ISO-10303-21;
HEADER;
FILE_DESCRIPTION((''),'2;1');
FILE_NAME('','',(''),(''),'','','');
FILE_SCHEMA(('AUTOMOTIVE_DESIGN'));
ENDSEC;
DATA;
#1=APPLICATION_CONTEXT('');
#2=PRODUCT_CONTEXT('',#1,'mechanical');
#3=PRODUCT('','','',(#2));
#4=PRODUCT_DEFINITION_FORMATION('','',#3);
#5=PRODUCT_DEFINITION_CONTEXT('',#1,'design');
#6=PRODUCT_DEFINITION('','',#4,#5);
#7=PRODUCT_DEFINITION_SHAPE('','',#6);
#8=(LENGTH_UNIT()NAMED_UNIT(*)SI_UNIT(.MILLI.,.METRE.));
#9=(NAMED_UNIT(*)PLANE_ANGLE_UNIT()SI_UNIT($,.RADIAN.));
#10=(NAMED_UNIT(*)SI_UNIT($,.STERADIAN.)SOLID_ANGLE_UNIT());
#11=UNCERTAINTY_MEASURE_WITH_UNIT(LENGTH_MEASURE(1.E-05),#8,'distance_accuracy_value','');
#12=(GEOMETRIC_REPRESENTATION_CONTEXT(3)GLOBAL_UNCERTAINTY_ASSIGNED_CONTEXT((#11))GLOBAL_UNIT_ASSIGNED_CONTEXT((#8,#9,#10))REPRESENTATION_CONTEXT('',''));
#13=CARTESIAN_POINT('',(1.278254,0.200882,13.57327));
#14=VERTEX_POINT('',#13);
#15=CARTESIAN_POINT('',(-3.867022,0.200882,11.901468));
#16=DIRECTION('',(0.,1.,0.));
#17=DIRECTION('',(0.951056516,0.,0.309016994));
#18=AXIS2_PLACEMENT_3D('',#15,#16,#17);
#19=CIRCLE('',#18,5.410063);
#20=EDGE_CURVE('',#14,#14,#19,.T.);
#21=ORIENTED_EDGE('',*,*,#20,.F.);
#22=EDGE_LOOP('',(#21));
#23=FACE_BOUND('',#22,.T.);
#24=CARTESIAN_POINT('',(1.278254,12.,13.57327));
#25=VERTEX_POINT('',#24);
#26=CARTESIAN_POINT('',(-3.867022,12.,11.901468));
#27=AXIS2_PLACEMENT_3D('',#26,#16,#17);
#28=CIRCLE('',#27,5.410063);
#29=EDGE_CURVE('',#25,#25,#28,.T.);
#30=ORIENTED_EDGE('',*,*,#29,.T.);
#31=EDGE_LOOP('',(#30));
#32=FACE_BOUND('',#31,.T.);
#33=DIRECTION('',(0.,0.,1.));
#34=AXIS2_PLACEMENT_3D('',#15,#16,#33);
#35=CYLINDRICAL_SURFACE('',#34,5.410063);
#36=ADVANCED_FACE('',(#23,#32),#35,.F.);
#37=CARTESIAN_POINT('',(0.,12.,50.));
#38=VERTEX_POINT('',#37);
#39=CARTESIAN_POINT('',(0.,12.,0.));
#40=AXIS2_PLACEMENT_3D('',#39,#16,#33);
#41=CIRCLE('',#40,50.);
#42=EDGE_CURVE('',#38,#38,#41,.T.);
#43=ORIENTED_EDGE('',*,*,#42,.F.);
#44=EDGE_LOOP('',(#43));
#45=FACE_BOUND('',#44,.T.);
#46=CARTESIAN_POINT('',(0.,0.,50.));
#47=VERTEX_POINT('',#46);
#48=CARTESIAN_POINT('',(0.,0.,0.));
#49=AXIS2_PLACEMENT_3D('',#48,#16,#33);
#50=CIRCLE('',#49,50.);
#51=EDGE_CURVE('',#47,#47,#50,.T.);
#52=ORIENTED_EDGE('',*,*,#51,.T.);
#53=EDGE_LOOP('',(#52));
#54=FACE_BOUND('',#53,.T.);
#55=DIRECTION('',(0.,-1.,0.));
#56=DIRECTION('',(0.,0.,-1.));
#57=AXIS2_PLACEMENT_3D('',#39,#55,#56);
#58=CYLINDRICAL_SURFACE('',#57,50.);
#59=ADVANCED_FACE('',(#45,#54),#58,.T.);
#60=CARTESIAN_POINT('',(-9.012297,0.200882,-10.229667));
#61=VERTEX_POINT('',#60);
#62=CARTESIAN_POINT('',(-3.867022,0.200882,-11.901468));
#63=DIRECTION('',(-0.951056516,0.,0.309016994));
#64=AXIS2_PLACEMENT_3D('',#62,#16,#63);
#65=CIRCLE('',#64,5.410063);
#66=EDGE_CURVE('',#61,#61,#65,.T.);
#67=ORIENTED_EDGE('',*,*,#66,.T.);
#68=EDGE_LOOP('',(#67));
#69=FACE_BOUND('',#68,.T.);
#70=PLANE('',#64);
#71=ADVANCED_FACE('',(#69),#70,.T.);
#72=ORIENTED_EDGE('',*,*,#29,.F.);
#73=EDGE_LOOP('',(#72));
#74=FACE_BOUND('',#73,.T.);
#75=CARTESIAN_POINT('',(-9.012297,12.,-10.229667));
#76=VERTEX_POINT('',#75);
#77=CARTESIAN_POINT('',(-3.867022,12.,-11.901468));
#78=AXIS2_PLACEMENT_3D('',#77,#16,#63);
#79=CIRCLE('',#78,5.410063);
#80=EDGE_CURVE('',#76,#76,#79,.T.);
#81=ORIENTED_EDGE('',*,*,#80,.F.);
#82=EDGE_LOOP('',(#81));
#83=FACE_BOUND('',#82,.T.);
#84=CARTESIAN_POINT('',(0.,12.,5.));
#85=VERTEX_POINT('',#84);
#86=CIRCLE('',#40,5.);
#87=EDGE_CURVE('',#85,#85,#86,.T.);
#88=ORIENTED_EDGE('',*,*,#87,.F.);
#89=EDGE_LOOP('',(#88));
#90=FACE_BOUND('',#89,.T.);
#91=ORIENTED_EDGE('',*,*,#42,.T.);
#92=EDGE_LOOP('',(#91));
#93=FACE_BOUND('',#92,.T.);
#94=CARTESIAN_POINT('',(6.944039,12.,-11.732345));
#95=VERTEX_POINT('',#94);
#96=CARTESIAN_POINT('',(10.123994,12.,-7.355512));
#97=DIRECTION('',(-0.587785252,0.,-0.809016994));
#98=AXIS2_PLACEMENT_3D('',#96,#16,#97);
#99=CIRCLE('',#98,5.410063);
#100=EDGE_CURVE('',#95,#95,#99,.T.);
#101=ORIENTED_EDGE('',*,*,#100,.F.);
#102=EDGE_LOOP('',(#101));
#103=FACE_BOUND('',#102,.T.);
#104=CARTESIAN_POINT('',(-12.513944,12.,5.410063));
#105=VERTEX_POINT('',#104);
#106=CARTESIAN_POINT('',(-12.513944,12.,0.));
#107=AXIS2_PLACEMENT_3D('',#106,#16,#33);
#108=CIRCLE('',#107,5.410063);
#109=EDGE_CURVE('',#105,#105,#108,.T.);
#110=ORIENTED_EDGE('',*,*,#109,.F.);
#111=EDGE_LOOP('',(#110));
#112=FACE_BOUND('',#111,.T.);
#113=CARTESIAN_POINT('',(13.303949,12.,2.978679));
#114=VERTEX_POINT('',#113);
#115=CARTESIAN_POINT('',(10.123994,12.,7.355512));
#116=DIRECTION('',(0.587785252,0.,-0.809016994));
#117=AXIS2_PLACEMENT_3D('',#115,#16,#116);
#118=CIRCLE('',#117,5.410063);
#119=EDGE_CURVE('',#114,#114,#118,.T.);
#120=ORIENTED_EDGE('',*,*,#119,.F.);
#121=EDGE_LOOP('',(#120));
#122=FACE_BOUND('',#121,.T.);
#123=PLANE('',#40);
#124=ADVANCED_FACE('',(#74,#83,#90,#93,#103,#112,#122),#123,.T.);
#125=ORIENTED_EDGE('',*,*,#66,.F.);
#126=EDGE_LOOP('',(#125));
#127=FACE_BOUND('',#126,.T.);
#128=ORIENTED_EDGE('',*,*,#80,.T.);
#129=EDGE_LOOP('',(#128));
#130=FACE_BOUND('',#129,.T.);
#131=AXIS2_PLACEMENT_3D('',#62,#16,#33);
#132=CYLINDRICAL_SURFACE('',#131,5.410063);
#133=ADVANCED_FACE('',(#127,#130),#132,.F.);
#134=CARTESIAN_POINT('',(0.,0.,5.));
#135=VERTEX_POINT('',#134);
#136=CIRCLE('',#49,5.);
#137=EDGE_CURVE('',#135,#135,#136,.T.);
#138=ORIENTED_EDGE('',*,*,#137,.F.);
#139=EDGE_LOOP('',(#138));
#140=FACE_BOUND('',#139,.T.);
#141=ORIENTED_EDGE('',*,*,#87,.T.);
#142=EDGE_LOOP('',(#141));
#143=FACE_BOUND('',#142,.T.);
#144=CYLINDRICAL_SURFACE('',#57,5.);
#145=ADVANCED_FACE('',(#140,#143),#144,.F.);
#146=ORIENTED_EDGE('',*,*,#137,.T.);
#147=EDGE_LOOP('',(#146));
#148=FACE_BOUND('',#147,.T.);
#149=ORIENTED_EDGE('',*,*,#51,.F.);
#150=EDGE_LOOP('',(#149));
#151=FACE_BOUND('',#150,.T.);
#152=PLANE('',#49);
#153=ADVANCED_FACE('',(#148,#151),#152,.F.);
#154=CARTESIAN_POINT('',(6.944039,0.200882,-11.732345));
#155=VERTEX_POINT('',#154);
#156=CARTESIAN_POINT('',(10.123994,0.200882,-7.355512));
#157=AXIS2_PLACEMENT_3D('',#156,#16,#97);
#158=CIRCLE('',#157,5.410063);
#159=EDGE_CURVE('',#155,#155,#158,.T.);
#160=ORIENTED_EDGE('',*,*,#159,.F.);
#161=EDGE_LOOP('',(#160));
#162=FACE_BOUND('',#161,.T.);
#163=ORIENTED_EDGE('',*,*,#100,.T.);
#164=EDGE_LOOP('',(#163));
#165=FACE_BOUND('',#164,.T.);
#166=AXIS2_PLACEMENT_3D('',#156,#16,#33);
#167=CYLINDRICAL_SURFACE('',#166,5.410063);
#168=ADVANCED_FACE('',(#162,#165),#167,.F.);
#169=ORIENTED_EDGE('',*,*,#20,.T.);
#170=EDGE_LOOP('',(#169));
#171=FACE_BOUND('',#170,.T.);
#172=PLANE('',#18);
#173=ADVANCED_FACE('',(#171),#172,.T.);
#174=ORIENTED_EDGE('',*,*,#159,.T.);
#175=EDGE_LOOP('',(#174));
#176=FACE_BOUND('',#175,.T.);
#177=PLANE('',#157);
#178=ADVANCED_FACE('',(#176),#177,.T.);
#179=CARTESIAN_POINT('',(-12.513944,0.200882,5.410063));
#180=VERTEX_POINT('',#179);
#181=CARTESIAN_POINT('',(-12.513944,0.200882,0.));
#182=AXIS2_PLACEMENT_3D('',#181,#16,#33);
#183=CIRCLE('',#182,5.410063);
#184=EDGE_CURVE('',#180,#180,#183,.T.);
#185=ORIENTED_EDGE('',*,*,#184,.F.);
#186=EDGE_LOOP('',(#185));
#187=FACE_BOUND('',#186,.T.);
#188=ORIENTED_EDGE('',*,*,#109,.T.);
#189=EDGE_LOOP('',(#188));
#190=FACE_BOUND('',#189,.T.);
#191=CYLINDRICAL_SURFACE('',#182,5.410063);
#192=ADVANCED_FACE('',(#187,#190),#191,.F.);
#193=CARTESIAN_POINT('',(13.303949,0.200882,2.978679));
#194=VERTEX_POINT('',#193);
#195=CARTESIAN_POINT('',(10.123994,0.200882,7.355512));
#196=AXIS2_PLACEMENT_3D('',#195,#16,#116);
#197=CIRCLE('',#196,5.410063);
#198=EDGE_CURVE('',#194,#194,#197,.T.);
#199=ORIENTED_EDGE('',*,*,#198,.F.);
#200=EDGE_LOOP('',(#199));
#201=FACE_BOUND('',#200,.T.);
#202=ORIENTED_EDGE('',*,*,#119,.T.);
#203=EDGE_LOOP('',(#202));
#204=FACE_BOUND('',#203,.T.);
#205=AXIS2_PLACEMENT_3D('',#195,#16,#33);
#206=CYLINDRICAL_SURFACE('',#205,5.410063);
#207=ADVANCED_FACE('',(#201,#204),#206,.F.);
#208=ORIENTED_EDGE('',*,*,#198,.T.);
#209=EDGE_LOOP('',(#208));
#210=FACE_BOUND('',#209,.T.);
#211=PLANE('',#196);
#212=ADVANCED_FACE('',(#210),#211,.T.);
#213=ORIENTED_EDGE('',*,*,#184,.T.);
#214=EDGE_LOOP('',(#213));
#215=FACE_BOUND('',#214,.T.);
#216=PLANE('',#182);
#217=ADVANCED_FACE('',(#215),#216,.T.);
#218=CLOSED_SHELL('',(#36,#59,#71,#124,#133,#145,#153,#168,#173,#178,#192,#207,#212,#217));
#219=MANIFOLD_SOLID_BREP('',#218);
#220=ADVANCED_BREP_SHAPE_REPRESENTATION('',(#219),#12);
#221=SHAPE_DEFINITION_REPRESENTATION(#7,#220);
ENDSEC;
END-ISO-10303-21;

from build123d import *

# Parameters (mm, degrees)
SKETCH1_R           = 50
BOSS_EXTRUDE1_DEPTH = 12
SKETCH2_R           = 5
CUT_EXTRUDE1_DEPTH  = 72.721684308
SKETCH3_R           = 5.410062526
CUT_EXTRUDE2_DEPTH  = 11.799118227
CIRPATTERN1_COUNT   = 5


with BuildPart() as part:
    # Sketch1 → Boss-Extrude1 (new body)
    with BuildSketch(Plane(origin=(0, 0, 0), x_dir=(1, 0, 0), z_dir=(0, 1, 0))):
        Circle(SKETCH1_R)
    extrude(amount=BOSS_EXTRUDE1_DEPTH)

    # Sketch2 → Cut-Extrude1 (cut, through all)
    with BuildSketch(Plane(origin=(0, 0, 0), x_dir=(1, 0, 0), z_dir=(0, 1, 0))):
        Circle(SKETCH2_R)
    extrude(amount=CUT_EXTRUDE1_DEPTH, mode=Mode.SUBTRACT)

    # Sketch3 → Cut-Extrude2 (cut)
    with BuildSketch(Plane(origin=(0, 12, 0), x_dir=(1, 0, 0), z_dir=(0, 1, 0))):
        with Locations((-12.513944473, 0)):
            Circle(SKETCH3_R)
    cut_extrude2 = extrude(amount=-CUT_EXTRUDE2_DEPTH, mode=Mode.SUBTRACT)

    # CirPattern1: Cut-Extrude2 ×5 about axis
    cirpattern1_axis = Axis((0, 0, 0), (0, 1, 0))
    for i in range(1, CIRPATTERN1_COUNT):
        add(cut_extrude2.rotate(cirpattern1_axis, i * 360 / CIRPATTERN1_COUNT), mode=Mode.SUBTRACT)


solid = part.part
